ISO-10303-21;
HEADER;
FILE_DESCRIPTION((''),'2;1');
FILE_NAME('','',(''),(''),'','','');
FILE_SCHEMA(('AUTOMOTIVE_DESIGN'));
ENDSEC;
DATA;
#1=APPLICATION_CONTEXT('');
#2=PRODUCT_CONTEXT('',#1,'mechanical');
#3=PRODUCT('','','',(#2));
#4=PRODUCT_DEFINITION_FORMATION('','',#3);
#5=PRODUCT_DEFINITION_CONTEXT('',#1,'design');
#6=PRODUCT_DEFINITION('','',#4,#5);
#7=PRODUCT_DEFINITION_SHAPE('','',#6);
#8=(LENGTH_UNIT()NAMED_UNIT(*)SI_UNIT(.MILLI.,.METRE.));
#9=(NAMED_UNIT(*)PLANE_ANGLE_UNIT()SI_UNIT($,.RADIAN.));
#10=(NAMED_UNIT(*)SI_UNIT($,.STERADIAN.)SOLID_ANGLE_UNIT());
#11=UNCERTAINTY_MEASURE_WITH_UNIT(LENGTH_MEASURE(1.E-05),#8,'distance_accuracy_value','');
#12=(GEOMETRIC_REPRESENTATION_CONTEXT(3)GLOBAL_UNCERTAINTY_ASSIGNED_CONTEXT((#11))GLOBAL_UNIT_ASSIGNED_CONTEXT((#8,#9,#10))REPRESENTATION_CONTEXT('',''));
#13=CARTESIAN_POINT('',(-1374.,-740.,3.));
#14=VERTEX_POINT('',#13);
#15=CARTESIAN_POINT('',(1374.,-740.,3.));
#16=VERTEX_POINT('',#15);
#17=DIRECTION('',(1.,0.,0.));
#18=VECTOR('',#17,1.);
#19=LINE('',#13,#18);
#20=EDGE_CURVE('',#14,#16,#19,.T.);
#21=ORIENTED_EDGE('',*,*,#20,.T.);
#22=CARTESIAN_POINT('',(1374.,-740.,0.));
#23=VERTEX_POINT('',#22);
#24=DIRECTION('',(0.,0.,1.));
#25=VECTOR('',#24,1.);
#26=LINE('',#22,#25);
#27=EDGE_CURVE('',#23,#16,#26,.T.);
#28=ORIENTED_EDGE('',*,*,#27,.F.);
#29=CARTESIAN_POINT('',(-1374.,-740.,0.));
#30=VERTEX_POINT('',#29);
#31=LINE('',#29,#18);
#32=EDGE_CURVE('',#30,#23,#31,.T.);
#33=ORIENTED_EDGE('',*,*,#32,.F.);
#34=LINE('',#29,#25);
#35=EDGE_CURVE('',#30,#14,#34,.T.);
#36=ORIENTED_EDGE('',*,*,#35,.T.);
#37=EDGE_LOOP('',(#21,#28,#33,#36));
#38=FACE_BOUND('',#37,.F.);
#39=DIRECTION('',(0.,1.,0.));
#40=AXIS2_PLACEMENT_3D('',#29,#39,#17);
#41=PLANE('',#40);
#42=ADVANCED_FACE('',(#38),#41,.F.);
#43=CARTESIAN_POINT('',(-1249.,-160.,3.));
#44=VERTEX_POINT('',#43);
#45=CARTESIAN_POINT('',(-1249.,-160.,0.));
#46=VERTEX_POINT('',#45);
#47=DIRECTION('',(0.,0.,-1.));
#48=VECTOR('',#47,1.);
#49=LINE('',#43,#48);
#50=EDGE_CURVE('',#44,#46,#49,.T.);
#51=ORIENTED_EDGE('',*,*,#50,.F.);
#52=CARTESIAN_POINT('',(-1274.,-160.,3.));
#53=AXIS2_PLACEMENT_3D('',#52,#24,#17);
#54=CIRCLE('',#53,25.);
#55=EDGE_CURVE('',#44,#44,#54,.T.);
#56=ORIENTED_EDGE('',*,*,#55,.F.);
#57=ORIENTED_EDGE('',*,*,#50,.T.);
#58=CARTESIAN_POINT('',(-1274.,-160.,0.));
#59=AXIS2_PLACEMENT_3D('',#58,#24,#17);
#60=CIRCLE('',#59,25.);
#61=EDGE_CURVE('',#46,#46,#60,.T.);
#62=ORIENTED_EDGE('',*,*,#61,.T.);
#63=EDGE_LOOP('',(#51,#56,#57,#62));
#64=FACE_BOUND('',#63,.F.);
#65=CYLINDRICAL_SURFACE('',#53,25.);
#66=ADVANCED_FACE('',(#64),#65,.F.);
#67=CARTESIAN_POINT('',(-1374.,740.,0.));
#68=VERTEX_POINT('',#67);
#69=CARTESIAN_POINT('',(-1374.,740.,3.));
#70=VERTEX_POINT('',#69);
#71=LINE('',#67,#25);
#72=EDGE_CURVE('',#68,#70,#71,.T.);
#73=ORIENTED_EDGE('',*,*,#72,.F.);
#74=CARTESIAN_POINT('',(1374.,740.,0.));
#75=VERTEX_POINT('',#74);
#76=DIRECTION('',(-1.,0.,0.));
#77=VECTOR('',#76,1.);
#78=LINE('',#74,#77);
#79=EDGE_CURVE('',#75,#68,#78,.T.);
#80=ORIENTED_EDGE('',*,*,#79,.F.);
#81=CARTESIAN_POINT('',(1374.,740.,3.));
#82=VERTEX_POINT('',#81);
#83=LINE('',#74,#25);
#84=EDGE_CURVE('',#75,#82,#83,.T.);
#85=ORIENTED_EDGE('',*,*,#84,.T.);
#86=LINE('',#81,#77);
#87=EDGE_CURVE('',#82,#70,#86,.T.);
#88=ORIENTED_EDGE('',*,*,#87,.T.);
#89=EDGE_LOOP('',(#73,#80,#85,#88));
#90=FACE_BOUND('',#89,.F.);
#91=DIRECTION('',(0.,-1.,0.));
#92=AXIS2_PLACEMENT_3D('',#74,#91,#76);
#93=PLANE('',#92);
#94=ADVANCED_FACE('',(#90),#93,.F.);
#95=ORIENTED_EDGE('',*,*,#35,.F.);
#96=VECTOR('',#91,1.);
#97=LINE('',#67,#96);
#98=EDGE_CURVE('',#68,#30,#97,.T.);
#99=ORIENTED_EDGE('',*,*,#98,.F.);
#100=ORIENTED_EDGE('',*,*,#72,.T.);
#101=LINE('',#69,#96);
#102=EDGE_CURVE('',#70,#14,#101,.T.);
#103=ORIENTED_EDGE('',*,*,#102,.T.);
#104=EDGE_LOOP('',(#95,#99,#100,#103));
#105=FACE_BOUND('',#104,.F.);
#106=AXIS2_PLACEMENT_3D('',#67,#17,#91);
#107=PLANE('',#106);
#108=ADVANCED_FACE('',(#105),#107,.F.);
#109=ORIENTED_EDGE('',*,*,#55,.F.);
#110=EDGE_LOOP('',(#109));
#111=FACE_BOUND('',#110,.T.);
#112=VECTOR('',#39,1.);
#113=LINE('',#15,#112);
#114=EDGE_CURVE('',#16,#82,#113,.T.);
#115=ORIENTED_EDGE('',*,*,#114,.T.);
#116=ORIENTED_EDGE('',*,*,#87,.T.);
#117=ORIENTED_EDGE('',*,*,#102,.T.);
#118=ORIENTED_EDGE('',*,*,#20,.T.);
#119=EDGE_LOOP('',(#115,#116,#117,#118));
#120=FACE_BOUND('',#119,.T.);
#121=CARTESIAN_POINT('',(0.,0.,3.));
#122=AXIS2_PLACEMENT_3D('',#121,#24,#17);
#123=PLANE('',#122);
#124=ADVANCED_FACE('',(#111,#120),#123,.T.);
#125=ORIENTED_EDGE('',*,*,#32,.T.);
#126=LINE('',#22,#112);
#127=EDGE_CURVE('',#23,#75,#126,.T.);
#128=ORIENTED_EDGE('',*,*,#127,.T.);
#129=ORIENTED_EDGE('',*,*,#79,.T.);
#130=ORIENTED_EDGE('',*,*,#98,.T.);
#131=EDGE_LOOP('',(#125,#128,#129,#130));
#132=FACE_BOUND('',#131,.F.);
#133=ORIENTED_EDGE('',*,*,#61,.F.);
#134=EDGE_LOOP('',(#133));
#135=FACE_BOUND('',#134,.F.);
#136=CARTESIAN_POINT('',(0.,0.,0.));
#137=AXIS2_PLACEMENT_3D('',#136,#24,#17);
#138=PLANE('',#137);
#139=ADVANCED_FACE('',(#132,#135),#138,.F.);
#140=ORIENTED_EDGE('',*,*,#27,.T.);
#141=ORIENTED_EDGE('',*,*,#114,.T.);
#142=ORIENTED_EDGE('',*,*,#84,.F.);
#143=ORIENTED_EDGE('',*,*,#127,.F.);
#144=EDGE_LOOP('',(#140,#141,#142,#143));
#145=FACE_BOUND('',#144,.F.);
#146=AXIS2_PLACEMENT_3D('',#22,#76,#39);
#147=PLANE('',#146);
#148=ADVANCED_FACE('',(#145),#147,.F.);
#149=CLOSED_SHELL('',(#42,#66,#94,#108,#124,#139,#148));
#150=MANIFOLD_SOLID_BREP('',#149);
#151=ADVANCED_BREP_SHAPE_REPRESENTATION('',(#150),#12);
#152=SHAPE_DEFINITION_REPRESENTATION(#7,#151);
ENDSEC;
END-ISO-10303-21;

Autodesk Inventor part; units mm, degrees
ref_plane "YZ Plane" through (0, 0, 0) normal (1, 0, 0) x (0, 1, 0)
ref_plane "XZ Plane" through (0, 0, 0) normal (0, 1, 0) x (-1, 0, 0)
ref_plane "XY Plane" through (0, 0, 0) normal (0, 0, 1) x (1, 0, 0)
sketch "Sketch1" plane through (0, 0, 0) normal (0, 0, 1) x (1, 0, 0)
  line L0 (-1374, -740) -> (1374, -740)
  line L1 (1374, -740) -> (1374, 740)
  line L2 (1374, 740) -> (-1374, 740)
  line L3 (-1374, 740) -> (-1374, -740)
  line L4 (-1374, -740) -> (1374, 740) construction
  line L5 (1374, -740) -> (-1374, 740) construction
  point P0 (0, 0)
  dimension "d0" = 2748
  dimension "d1" = 1480
extrude "Plate1" add sketch "Sketch1" along normal blind 3
sketch "Sketch5" plane through (0, 0, 3) normal (0, 0, 1) x (1, 0, 0)
  line L0 (1349, 715) -> (1349, 515) construction
  line L1 (1349, 515) -> (1334, 515) construction
  line L2 (1334, 515) -> (1334, 715) construction
  line L3 (1334, 715) -> (1349, 715) construction
  line L4 (1374, 740) -> (1374, -740) projected
  line L5 (-1374, 740) -> (1374, 740) projected
  point P0 (0, 0)
  dimension "d26" = 200
  dimension "d27" = 15
  dimension "d28" = 25
  dimension "d29" = 25
mark "Mark1"
sketch "Sketch6" plane through (-1374, -740, 3) normal (0, 0, 1) x (1, 0, 0)
  circle A0 centre (100, 580) radius 25
  line L0 (0, 1480) -> (2748, 1480) projected
  line L1 (0, 0) -> (0, 1480) projected
  point P0 (1374, 740)
  dimension "d30" = 50
  dimension "d31" = 900
  dimension "d32" = 100
extrude "Extrusion2" cut sketch "Sketch6" against normal up to surface (3 mm away)
equation "\"d2\" = Thickness"
equation "\"BendReliefWidth\" = Thickness"
equation "\"BendReliefDepth\" = 0.5 * Thickness"
equation "\"CornerReliefSize\" = 4 * Thickness"
equation "\"MinimumRemnant\" = 2 * Thickness"
equation "\"TransitionRadius\" = BendRadius"
equation "\"JacobiRadiusSize\" = BendRadius"
equation "\"GapSize\" = Thickness"
equation "\"Thickness\" = 3"
equation "\"BendRadius\" = 5"
properties part number "BSH 043 board" material "09g2s"
